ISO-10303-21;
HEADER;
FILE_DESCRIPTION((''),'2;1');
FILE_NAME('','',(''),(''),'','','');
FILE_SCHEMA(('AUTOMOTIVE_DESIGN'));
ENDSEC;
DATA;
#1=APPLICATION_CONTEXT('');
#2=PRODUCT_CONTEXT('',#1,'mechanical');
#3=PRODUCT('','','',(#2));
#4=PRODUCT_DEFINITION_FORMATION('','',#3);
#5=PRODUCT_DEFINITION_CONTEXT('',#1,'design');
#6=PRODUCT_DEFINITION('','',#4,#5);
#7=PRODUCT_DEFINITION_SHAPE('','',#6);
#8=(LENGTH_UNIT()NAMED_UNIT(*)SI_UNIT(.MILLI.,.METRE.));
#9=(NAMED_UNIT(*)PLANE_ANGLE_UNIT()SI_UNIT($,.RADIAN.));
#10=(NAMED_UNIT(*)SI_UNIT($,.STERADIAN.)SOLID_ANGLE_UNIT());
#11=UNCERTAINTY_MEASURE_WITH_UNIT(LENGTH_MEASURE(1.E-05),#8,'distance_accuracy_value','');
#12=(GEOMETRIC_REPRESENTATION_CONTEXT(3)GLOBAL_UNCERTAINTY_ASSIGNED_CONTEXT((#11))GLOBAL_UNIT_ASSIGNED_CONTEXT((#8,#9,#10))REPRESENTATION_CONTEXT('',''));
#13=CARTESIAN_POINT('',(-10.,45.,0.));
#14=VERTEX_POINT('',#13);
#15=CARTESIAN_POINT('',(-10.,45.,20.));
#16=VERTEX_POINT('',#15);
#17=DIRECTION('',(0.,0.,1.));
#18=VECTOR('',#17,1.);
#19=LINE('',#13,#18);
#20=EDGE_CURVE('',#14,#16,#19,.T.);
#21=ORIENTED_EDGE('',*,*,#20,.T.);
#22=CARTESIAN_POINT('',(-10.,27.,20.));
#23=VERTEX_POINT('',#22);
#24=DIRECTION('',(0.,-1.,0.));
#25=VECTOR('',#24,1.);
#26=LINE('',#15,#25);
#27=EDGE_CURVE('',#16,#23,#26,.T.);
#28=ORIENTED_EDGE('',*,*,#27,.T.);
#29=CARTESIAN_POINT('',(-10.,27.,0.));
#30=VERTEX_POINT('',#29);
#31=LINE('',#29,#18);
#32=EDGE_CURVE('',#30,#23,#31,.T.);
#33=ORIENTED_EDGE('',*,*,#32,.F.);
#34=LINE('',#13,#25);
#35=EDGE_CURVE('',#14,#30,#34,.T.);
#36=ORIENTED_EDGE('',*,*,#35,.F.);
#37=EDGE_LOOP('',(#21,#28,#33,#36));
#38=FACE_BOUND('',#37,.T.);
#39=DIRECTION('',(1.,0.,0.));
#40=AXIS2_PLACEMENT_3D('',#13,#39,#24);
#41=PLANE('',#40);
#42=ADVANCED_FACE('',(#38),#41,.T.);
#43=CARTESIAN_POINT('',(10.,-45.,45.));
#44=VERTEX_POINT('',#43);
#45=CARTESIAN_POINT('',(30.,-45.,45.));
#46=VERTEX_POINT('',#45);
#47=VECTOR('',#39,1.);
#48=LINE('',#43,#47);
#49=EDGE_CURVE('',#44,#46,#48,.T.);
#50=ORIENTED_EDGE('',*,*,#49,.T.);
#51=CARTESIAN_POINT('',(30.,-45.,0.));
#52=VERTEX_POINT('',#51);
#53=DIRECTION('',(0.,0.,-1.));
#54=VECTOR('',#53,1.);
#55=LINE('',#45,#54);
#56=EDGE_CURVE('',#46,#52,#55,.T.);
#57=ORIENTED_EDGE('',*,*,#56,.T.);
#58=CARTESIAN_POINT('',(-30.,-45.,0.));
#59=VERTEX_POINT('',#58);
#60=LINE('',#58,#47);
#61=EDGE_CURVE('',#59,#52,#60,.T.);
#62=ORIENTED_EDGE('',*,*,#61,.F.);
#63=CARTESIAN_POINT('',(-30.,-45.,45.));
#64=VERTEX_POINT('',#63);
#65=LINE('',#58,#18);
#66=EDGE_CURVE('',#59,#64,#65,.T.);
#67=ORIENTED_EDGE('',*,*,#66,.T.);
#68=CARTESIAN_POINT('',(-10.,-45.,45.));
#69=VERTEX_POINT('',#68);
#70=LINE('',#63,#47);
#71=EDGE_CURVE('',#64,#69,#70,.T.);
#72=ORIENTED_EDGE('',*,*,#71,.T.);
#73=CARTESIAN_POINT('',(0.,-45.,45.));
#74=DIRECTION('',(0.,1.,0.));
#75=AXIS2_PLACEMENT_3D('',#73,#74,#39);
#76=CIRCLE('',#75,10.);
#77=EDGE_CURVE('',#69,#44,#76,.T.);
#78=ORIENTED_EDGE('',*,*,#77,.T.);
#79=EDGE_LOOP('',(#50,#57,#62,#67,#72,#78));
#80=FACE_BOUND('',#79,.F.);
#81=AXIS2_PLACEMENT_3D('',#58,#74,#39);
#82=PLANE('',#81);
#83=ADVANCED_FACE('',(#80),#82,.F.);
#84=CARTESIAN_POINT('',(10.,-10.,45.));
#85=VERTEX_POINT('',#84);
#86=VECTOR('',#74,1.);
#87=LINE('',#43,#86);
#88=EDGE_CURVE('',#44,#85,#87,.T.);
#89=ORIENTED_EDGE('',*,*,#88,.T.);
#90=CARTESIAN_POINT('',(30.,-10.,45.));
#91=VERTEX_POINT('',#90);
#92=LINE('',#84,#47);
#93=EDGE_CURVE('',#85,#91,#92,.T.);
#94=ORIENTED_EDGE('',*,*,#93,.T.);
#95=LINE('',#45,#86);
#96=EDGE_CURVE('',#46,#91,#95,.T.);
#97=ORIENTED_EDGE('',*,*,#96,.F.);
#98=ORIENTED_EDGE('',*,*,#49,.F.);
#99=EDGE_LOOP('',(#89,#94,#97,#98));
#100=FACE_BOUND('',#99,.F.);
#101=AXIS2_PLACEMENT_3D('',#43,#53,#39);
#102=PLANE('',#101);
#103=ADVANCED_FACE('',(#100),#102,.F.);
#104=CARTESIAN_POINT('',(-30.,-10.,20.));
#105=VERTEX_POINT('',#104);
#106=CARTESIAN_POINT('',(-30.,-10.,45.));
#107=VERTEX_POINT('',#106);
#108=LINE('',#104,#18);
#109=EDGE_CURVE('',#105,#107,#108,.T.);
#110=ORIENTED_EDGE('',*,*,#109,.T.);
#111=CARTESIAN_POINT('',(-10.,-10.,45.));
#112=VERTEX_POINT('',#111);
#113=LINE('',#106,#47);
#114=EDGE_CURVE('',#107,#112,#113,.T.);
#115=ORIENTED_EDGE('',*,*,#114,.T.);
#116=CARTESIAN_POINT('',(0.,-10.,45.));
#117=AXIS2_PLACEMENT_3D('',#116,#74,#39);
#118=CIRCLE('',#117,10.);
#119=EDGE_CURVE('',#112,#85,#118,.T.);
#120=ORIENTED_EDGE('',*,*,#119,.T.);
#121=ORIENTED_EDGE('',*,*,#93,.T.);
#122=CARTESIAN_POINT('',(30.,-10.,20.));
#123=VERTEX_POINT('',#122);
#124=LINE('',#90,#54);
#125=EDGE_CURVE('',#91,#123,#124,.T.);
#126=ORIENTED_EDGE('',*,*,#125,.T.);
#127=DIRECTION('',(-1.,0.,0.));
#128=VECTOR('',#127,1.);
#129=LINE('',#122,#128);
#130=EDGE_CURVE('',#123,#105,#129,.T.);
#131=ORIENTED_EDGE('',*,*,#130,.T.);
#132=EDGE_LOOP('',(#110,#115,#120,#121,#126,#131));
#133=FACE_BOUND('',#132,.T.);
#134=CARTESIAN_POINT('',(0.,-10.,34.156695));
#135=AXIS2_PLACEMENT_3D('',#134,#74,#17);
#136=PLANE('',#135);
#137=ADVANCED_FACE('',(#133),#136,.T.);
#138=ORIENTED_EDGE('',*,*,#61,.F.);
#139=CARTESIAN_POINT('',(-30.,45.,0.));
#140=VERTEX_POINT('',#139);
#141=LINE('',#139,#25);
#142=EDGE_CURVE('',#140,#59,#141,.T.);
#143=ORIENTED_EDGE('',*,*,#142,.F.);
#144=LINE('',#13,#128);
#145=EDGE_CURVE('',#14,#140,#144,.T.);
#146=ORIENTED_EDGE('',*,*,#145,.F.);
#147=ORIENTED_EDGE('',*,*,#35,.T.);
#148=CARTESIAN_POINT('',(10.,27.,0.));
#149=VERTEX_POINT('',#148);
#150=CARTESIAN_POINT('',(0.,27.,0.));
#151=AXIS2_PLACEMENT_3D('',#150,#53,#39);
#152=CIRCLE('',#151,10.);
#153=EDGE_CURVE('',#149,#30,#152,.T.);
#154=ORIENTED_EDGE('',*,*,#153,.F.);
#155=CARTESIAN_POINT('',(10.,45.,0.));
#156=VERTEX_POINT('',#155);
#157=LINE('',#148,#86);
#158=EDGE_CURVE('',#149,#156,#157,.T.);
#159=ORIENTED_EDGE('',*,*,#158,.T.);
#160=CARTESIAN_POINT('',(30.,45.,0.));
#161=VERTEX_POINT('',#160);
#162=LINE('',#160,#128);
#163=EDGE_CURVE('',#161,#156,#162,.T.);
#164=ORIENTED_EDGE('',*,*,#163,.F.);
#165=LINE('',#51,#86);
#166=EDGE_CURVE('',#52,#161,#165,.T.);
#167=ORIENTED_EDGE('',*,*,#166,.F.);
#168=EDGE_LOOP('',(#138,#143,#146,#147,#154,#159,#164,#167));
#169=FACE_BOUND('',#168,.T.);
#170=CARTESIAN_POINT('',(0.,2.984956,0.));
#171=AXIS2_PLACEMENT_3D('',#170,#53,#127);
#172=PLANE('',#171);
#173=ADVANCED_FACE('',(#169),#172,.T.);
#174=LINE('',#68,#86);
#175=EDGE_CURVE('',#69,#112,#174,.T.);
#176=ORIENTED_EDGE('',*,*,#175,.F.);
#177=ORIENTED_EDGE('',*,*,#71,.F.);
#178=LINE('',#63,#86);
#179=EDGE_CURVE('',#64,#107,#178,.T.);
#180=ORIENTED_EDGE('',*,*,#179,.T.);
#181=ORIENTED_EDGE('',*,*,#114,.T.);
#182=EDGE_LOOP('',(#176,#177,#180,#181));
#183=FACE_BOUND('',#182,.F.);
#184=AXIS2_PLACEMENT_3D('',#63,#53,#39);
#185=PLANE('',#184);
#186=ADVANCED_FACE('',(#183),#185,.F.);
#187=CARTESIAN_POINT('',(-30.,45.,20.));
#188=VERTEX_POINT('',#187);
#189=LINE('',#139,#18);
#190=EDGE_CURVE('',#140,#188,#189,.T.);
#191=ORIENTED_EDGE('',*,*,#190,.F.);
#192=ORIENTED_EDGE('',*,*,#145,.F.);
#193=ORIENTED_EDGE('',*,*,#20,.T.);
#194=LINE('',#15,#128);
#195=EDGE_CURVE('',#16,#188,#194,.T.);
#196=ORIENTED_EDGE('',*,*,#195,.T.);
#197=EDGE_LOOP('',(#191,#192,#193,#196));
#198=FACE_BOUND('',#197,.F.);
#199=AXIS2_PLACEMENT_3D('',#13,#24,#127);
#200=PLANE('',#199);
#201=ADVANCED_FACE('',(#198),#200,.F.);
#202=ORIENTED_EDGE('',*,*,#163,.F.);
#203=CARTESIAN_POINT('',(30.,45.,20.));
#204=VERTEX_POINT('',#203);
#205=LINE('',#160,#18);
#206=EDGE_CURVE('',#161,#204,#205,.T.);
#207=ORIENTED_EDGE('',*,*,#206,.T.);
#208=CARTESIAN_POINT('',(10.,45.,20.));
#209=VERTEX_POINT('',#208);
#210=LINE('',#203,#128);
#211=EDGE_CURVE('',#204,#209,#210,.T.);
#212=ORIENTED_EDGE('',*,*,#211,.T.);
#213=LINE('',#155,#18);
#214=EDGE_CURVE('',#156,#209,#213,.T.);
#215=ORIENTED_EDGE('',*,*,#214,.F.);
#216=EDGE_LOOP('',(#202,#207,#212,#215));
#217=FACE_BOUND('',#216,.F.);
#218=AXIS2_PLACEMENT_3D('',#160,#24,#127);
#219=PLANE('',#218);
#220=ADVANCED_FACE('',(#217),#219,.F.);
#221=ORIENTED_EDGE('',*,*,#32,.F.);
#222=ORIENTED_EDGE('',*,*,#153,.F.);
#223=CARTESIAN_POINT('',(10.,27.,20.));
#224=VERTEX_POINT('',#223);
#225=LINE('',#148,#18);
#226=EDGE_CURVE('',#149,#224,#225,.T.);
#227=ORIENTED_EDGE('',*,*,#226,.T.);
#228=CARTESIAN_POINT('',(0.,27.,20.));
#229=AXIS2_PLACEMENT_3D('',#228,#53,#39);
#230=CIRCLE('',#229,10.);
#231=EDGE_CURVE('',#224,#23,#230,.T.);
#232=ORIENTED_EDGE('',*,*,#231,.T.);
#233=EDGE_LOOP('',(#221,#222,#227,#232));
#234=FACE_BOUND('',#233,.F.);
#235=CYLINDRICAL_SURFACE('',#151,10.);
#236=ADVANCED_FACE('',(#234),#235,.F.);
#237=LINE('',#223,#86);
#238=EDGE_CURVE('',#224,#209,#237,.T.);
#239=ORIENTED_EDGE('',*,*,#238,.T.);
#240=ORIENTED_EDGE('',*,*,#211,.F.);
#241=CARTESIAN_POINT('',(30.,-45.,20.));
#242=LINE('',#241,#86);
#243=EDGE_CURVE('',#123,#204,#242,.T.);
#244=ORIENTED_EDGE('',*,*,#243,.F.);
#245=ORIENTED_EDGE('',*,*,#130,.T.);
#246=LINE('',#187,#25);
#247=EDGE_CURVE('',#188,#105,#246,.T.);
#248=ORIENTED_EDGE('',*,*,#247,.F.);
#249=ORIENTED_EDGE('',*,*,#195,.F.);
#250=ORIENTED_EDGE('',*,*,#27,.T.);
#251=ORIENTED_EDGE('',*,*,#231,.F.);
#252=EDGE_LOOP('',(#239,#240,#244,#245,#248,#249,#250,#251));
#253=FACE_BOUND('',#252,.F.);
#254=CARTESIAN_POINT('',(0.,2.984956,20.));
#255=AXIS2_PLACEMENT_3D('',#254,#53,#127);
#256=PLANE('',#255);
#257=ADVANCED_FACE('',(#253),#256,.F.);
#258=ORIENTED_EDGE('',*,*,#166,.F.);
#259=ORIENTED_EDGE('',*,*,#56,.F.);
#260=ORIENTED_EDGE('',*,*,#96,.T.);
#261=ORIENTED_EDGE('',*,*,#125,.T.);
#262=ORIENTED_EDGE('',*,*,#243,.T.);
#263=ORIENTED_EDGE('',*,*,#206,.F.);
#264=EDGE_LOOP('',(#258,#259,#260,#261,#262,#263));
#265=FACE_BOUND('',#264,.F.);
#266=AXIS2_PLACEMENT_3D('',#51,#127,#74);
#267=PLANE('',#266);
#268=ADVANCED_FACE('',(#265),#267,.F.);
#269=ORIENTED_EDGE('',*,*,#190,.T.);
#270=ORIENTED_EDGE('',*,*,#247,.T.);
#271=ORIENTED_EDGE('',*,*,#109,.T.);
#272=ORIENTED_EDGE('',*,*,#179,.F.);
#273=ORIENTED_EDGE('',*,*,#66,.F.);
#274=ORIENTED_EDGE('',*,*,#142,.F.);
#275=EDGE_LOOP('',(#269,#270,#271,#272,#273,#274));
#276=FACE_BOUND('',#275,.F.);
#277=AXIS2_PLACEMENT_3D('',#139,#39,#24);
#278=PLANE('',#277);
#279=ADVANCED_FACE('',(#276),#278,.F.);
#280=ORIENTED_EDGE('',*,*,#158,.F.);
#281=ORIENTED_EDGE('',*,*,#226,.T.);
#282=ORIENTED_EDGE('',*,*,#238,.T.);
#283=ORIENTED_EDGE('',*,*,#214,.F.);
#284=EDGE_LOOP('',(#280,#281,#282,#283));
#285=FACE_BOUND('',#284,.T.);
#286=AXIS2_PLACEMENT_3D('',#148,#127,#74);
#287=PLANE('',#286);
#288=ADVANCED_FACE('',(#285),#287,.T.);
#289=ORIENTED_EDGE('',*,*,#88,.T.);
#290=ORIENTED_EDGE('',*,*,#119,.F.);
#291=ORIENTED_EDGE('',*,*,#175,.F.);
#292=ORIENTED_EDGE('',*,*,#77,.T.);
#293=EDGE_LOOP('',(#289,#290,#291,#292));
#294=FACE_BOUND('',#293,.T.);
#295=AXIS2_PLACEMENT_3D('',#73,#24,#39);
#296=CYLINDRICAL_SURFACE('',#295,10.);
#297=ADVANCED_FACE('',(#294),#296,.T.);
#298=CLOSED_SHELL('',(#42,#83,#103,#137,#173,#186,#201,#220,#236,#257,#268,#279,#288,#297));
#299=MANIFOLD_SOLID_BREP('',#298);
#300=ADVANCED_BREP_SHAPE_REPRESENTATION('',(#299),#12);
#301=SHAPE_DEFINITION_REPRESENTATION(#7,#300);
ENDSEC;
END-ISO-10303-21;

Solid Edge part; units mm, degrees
sketch "Sketch1" plane through (0, 0, 0) normal (0, 0, 1) x (1, 0, 0)
  line L0 (-10, 45) -> (-10, 27)
  line L1 (10, 27) -> (10, 45)
  line L2 (30, 45) -> (10, 45)
  line L3 (30, -45) -> (30, 45)
  line L4 (-30, -45) -> (30, -45)
  line L5 (-30, 45) -> (-30, -45)
  line L6 (-10, 45) -> (-30, 45)
  arc A0 (10, 27) -> (-10, 27) centre (0, 27) cw
extrude "Protrusion1" add sketch "Sketch1" along normal blind 20
sketch "Sketch2" plane through (0, -45, 10) normal (0, -1, 0) x (1, 0, 0)
  line L0 (30, 35) -> (30, 10)
  line L1 (10, 35) -> (30, 35)
  line L2 (-30, 35) -> (-10, 35)
  line L3 (-30, 10) -> (-30, 35)
  arc A0 (-10, 35) -> (10, 35) centre (0, 35) cw
extrude "ExtrudedProtrusion_2" add sketch "Sketch2" against normal blind 35 material side at (30.05, -45, 32.5)
